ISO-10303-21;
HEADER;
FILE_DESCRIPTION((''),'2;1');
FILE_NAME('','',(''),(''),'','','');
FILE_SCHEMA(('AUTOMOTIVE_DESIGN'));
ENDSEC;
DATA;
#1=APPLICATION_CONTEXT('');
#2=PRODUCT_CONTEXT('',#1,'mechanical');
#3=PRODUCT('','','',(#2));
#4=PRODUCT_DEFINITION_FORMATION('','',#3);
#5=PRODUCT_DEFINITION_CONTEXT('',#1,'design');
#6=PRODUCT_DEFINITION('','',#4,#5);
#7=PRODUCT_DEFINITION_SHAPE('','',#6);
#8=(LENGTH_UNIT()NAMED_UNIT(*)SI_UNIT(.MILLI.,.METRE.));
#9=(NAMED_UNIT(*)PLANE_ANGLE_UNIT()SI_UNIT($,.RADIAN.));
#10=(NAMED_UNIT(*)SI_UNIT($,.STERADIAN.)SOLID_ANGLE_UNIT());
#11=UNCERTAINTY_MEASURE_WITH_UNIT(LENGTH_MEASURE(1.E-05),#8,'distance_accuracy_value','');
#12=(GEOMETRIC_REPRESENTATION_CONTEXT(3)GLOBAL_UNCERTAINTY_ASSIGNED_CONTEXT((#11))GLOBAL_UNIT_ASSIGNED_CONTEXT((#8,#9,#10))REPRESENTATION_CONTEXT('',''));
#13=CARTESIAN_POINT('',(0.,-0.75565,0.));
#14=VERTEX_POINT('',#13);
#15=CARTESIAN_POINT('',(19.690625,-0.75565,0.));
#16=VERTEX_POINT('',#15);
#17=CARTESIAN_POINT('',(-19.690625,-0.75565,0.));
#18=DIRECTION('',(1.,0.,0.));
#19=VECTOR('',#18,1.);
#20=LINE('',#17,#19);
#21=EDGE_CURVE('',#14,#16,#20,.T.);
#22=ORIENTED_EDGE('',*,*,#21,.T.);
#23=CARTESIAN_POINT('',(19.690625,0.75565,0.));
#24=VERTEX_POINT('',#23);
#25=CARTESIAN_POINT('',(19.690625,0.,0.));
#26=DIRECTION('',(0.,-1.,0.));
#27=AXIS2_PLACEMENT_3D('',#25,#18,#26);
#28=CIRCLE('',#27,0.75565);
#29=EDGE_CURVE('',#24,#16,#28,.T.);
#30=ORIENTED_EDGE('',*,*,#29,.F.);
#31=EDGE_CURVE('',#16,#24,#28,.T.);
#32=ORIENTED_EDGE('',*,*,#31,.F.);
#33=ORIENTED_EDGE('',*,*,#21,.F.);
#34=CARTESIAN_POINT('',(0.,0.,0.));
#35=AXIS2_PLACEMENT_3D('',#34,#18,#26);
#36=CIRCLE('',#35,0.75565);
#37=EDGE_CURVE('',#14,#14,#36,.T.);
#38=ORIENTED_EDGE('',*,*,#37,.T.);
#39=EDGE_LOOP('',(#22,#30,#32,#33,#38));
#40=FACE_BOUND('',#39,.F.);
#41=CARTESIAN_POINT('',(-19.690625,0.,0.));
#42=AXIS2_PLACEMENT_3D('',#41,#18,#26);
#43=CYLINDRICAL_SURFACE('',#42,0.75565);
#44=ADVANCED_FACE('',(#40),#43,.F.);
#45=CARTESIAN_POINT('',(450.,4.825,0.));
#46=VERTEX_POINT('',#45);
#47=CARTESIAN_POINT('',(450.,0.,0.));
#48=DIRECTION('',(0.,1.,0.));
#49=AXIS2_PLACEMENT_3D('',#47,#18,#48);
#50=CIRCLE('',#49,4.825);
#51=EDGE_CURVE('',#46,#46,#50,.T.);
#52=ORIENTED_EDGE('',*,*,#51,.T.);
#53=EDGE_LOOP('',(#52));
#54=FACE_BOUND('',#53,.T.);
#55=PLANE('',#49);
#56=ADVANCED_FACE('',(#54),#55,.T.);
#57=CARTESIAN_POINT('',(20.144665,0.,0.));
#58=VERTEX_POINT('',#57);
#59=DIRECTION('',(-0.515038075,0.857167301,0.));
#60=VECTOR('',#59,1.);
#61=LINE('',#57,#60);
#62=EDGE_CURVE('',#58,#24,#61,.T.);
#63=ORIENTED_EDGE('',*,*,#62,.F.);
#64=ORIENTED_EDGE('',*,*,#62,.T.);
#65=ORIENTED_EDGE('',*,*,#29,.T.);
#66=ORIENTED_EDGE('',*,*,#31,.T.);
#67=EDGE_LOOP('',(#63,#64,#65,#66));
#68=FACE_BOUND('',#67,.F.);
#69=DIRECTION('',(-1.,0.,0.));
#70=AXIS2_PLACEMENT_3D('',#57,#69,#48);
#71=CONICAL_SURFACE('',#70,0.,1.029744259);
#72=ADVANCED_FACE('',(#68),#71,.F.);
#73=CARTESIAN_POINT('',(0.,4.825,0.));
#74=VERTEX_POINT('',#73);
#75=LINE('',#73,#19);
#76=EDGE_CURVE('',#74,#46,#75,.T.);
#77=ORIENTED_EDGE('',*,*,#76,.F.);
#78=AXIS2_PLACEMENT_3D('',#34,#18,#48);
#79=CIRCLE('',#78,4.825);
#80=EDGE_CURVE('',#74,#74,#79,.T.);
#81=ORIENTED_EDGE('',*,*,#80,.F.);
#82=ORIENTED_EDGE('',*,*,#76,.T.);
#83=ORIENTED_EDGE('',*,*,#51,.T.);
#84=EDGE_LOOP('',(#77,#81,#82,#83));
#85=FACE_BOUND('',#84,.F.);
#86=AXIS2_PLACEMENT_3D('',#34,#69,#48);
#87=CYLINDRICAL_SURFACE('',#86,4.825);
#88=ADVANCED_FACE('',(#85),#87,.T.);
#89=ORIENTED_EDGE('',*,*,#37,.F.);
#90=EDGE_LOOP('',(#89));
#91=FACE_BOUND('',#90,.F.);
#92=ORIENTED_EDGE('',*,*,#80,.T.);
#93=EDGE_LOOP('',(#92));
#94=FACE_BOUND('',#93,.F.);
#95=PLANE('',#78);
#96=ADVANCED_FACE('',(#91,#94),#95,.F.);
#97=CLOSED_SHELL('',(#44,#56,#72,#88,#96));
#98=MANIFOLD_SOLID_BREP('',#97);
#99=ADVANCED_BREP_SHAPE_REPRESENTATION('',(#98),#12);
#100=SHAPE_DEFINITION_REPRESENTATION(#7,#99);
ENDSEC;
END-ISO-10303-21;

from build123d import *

# Parameters (mm, degrees)
F0_R     = 4.825
F1_DEPTH = 450
F2_D     = 1.5113
F2_DEPTH = 19.690625
F2_TIP   = 0.4540403268


# Not quite as in the source:
# - a feature of the source that left no trace in its solid (it failed there, or was rolled back) is left out


with BuildPart() as f1:
    # F0 (on Right) → F1 (new body)
    with BuildSketch(Plane.YZ):
        Circle(F0_R)
    extrude(amount=F1_DEPTH)

    # F2
    with Locations(Plane(origin=(0, 0, 0), x_dir=(0, 1, 0), z_dir=(-1, 0, 0))):
        with Locations((0, 0), (0, 0), (0, 0)):
            Hole(F2_D / 2, depth=F2_DEPTH)
            with Locations((0, 0, -(F2_DEPTH + F2_TIP / 2))):  # 118° drill point
                Cone(0, F2_D / 2, F2_TIP, mode=Mode.SUBTRACT)


solid = f1.part
